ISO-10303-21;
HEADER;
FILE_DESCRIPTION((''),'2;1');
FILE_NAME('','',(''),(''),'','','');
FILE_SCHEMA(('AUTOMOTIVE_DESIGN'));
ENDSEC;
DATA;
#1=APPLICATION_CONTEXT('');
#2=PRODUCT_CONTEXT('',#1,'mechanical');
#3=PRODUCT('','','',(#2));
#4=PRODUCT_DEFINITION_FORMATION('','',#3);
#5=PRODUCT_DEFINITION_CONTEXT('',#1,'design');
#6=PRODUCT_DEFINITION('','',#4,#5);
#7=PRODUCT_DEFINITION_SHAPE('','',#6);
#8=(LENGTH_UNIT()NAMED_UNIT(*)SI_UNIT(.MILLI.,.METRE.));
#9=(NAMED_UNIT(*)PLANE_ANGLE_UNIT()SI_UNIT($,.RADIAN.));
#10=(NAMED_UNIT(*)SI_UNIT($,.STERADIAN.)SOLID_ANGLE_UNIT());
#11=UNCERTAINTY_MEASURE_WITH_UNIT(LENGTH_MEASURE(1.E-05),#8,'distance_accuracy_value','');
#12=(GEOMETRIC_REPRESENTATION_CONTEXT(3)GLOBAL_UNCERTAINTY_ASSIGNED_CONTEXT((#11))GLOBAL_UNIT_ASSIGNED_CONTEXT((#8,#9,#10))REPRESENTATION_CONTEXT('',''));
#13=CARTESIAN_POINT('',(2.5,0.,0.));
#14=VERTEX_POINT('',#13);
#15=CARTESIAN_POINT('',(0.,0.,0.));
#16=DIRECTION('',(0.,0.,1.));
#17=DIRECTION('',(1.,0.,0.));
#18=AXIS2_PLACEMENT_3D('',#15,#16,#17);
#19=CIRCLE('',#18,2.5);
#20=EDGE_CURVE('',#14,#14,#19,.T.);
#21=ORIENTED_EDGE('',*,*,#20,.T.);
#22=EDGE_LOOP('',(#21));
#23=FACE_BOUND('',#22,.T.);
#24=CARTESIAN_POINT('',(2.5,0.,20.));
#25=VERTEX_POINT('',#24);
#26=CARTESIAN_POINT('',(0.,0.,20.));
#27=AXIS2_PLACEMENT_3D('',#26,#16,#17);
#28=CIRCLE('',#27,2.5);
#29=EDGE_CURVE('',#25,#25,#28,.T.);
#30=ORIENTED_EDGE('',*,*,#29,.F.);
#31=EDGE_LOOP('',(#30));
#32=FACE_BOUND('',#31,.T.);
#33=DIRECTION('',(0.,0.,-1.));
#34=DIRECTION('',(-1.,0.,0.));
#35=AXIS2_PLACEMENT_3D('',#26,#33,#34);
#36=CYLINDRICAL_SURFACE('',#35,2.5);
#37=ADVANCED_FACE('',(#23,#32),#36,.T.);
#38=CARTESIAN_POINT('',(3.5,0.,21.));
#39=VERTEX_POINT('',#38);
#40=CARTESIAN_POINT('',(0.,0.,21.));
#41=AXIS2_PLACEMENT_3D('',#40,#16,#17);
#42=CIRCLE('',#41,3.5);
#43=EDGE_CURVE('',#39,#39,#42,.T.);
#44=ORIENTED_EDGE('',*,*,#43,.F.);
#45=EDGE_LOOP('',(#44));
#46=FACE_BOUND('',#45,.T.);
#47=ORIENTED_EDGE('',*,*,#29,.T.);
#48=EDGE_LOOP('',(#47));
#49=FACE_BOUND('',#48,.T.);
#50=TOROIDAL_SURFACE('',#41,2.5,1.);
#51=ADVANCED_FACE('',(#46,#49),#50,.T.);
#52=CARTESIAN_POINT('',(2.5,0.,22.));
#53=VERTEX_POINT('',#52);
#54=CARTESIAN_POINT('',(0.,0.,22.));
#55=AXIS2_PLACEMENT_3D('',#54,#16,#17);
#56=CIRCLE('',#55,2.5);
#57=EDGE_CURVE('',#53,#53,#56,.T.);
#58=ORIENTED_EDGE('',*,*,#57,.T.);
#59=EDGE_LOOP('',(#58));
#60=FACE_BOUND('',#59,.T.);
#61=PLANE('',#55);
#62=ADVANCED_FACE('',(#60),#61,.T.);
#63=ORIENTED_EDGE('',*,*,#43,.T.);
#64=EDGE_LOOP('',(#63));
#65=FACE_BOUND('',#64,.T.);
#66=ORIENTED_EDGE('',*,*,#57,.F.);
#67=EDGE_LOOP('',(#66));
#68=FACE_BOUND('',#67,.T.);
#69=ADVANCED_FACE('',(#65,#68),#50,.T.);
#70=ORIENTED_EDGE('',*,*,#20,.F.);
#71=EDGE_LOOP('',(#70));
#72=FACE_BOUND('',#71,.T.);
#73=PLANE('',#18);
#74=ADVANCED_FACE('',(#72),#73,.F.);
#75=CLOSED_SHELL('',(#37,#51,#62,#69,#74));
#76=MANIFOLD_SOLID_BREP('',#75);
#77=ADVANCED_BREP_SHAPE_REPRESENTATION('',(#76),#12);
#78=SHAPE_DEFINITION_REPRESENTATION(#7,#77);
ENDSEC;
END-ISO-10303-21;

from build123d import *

# Parameters (mm, degrees)
SKETCH_1_R      = 2.5
EXTRUDE_1_DEPTH = 20
SKETCH_2_R      = 3.5
EXTRUDE_2_DEPTH = 2
FILLET_2_R      = 1


with BuildPart() as part:
    # 草图1 → 凸台-拉伸1 (new body)
    with BuildSketch(Plane.XY):
        Circle(SKETCH_1_R)
    extrude(amount=EXTRUDE_1_DEPTH)

    # 草图2 → 凸台-拉伸2 (add)
    with BuildSketch(Plane.XY.offset(20)):
        Circle(SKETCH_2_R)
    extrude(amount=EXTRUDE_2_DEPTH)

    # 圆角2
    fillet_2_edges = [part.edges().sort_by_distance(p)[0] for p in [
        (-3.5, 0, 20),
        (-3.5, 0, 22),
    ]]
    fillet(fillet_2_edges, radius=FILLET_2_R - 0.0001)  # a hair under: the kernel refuses the full size


solid = part.part
